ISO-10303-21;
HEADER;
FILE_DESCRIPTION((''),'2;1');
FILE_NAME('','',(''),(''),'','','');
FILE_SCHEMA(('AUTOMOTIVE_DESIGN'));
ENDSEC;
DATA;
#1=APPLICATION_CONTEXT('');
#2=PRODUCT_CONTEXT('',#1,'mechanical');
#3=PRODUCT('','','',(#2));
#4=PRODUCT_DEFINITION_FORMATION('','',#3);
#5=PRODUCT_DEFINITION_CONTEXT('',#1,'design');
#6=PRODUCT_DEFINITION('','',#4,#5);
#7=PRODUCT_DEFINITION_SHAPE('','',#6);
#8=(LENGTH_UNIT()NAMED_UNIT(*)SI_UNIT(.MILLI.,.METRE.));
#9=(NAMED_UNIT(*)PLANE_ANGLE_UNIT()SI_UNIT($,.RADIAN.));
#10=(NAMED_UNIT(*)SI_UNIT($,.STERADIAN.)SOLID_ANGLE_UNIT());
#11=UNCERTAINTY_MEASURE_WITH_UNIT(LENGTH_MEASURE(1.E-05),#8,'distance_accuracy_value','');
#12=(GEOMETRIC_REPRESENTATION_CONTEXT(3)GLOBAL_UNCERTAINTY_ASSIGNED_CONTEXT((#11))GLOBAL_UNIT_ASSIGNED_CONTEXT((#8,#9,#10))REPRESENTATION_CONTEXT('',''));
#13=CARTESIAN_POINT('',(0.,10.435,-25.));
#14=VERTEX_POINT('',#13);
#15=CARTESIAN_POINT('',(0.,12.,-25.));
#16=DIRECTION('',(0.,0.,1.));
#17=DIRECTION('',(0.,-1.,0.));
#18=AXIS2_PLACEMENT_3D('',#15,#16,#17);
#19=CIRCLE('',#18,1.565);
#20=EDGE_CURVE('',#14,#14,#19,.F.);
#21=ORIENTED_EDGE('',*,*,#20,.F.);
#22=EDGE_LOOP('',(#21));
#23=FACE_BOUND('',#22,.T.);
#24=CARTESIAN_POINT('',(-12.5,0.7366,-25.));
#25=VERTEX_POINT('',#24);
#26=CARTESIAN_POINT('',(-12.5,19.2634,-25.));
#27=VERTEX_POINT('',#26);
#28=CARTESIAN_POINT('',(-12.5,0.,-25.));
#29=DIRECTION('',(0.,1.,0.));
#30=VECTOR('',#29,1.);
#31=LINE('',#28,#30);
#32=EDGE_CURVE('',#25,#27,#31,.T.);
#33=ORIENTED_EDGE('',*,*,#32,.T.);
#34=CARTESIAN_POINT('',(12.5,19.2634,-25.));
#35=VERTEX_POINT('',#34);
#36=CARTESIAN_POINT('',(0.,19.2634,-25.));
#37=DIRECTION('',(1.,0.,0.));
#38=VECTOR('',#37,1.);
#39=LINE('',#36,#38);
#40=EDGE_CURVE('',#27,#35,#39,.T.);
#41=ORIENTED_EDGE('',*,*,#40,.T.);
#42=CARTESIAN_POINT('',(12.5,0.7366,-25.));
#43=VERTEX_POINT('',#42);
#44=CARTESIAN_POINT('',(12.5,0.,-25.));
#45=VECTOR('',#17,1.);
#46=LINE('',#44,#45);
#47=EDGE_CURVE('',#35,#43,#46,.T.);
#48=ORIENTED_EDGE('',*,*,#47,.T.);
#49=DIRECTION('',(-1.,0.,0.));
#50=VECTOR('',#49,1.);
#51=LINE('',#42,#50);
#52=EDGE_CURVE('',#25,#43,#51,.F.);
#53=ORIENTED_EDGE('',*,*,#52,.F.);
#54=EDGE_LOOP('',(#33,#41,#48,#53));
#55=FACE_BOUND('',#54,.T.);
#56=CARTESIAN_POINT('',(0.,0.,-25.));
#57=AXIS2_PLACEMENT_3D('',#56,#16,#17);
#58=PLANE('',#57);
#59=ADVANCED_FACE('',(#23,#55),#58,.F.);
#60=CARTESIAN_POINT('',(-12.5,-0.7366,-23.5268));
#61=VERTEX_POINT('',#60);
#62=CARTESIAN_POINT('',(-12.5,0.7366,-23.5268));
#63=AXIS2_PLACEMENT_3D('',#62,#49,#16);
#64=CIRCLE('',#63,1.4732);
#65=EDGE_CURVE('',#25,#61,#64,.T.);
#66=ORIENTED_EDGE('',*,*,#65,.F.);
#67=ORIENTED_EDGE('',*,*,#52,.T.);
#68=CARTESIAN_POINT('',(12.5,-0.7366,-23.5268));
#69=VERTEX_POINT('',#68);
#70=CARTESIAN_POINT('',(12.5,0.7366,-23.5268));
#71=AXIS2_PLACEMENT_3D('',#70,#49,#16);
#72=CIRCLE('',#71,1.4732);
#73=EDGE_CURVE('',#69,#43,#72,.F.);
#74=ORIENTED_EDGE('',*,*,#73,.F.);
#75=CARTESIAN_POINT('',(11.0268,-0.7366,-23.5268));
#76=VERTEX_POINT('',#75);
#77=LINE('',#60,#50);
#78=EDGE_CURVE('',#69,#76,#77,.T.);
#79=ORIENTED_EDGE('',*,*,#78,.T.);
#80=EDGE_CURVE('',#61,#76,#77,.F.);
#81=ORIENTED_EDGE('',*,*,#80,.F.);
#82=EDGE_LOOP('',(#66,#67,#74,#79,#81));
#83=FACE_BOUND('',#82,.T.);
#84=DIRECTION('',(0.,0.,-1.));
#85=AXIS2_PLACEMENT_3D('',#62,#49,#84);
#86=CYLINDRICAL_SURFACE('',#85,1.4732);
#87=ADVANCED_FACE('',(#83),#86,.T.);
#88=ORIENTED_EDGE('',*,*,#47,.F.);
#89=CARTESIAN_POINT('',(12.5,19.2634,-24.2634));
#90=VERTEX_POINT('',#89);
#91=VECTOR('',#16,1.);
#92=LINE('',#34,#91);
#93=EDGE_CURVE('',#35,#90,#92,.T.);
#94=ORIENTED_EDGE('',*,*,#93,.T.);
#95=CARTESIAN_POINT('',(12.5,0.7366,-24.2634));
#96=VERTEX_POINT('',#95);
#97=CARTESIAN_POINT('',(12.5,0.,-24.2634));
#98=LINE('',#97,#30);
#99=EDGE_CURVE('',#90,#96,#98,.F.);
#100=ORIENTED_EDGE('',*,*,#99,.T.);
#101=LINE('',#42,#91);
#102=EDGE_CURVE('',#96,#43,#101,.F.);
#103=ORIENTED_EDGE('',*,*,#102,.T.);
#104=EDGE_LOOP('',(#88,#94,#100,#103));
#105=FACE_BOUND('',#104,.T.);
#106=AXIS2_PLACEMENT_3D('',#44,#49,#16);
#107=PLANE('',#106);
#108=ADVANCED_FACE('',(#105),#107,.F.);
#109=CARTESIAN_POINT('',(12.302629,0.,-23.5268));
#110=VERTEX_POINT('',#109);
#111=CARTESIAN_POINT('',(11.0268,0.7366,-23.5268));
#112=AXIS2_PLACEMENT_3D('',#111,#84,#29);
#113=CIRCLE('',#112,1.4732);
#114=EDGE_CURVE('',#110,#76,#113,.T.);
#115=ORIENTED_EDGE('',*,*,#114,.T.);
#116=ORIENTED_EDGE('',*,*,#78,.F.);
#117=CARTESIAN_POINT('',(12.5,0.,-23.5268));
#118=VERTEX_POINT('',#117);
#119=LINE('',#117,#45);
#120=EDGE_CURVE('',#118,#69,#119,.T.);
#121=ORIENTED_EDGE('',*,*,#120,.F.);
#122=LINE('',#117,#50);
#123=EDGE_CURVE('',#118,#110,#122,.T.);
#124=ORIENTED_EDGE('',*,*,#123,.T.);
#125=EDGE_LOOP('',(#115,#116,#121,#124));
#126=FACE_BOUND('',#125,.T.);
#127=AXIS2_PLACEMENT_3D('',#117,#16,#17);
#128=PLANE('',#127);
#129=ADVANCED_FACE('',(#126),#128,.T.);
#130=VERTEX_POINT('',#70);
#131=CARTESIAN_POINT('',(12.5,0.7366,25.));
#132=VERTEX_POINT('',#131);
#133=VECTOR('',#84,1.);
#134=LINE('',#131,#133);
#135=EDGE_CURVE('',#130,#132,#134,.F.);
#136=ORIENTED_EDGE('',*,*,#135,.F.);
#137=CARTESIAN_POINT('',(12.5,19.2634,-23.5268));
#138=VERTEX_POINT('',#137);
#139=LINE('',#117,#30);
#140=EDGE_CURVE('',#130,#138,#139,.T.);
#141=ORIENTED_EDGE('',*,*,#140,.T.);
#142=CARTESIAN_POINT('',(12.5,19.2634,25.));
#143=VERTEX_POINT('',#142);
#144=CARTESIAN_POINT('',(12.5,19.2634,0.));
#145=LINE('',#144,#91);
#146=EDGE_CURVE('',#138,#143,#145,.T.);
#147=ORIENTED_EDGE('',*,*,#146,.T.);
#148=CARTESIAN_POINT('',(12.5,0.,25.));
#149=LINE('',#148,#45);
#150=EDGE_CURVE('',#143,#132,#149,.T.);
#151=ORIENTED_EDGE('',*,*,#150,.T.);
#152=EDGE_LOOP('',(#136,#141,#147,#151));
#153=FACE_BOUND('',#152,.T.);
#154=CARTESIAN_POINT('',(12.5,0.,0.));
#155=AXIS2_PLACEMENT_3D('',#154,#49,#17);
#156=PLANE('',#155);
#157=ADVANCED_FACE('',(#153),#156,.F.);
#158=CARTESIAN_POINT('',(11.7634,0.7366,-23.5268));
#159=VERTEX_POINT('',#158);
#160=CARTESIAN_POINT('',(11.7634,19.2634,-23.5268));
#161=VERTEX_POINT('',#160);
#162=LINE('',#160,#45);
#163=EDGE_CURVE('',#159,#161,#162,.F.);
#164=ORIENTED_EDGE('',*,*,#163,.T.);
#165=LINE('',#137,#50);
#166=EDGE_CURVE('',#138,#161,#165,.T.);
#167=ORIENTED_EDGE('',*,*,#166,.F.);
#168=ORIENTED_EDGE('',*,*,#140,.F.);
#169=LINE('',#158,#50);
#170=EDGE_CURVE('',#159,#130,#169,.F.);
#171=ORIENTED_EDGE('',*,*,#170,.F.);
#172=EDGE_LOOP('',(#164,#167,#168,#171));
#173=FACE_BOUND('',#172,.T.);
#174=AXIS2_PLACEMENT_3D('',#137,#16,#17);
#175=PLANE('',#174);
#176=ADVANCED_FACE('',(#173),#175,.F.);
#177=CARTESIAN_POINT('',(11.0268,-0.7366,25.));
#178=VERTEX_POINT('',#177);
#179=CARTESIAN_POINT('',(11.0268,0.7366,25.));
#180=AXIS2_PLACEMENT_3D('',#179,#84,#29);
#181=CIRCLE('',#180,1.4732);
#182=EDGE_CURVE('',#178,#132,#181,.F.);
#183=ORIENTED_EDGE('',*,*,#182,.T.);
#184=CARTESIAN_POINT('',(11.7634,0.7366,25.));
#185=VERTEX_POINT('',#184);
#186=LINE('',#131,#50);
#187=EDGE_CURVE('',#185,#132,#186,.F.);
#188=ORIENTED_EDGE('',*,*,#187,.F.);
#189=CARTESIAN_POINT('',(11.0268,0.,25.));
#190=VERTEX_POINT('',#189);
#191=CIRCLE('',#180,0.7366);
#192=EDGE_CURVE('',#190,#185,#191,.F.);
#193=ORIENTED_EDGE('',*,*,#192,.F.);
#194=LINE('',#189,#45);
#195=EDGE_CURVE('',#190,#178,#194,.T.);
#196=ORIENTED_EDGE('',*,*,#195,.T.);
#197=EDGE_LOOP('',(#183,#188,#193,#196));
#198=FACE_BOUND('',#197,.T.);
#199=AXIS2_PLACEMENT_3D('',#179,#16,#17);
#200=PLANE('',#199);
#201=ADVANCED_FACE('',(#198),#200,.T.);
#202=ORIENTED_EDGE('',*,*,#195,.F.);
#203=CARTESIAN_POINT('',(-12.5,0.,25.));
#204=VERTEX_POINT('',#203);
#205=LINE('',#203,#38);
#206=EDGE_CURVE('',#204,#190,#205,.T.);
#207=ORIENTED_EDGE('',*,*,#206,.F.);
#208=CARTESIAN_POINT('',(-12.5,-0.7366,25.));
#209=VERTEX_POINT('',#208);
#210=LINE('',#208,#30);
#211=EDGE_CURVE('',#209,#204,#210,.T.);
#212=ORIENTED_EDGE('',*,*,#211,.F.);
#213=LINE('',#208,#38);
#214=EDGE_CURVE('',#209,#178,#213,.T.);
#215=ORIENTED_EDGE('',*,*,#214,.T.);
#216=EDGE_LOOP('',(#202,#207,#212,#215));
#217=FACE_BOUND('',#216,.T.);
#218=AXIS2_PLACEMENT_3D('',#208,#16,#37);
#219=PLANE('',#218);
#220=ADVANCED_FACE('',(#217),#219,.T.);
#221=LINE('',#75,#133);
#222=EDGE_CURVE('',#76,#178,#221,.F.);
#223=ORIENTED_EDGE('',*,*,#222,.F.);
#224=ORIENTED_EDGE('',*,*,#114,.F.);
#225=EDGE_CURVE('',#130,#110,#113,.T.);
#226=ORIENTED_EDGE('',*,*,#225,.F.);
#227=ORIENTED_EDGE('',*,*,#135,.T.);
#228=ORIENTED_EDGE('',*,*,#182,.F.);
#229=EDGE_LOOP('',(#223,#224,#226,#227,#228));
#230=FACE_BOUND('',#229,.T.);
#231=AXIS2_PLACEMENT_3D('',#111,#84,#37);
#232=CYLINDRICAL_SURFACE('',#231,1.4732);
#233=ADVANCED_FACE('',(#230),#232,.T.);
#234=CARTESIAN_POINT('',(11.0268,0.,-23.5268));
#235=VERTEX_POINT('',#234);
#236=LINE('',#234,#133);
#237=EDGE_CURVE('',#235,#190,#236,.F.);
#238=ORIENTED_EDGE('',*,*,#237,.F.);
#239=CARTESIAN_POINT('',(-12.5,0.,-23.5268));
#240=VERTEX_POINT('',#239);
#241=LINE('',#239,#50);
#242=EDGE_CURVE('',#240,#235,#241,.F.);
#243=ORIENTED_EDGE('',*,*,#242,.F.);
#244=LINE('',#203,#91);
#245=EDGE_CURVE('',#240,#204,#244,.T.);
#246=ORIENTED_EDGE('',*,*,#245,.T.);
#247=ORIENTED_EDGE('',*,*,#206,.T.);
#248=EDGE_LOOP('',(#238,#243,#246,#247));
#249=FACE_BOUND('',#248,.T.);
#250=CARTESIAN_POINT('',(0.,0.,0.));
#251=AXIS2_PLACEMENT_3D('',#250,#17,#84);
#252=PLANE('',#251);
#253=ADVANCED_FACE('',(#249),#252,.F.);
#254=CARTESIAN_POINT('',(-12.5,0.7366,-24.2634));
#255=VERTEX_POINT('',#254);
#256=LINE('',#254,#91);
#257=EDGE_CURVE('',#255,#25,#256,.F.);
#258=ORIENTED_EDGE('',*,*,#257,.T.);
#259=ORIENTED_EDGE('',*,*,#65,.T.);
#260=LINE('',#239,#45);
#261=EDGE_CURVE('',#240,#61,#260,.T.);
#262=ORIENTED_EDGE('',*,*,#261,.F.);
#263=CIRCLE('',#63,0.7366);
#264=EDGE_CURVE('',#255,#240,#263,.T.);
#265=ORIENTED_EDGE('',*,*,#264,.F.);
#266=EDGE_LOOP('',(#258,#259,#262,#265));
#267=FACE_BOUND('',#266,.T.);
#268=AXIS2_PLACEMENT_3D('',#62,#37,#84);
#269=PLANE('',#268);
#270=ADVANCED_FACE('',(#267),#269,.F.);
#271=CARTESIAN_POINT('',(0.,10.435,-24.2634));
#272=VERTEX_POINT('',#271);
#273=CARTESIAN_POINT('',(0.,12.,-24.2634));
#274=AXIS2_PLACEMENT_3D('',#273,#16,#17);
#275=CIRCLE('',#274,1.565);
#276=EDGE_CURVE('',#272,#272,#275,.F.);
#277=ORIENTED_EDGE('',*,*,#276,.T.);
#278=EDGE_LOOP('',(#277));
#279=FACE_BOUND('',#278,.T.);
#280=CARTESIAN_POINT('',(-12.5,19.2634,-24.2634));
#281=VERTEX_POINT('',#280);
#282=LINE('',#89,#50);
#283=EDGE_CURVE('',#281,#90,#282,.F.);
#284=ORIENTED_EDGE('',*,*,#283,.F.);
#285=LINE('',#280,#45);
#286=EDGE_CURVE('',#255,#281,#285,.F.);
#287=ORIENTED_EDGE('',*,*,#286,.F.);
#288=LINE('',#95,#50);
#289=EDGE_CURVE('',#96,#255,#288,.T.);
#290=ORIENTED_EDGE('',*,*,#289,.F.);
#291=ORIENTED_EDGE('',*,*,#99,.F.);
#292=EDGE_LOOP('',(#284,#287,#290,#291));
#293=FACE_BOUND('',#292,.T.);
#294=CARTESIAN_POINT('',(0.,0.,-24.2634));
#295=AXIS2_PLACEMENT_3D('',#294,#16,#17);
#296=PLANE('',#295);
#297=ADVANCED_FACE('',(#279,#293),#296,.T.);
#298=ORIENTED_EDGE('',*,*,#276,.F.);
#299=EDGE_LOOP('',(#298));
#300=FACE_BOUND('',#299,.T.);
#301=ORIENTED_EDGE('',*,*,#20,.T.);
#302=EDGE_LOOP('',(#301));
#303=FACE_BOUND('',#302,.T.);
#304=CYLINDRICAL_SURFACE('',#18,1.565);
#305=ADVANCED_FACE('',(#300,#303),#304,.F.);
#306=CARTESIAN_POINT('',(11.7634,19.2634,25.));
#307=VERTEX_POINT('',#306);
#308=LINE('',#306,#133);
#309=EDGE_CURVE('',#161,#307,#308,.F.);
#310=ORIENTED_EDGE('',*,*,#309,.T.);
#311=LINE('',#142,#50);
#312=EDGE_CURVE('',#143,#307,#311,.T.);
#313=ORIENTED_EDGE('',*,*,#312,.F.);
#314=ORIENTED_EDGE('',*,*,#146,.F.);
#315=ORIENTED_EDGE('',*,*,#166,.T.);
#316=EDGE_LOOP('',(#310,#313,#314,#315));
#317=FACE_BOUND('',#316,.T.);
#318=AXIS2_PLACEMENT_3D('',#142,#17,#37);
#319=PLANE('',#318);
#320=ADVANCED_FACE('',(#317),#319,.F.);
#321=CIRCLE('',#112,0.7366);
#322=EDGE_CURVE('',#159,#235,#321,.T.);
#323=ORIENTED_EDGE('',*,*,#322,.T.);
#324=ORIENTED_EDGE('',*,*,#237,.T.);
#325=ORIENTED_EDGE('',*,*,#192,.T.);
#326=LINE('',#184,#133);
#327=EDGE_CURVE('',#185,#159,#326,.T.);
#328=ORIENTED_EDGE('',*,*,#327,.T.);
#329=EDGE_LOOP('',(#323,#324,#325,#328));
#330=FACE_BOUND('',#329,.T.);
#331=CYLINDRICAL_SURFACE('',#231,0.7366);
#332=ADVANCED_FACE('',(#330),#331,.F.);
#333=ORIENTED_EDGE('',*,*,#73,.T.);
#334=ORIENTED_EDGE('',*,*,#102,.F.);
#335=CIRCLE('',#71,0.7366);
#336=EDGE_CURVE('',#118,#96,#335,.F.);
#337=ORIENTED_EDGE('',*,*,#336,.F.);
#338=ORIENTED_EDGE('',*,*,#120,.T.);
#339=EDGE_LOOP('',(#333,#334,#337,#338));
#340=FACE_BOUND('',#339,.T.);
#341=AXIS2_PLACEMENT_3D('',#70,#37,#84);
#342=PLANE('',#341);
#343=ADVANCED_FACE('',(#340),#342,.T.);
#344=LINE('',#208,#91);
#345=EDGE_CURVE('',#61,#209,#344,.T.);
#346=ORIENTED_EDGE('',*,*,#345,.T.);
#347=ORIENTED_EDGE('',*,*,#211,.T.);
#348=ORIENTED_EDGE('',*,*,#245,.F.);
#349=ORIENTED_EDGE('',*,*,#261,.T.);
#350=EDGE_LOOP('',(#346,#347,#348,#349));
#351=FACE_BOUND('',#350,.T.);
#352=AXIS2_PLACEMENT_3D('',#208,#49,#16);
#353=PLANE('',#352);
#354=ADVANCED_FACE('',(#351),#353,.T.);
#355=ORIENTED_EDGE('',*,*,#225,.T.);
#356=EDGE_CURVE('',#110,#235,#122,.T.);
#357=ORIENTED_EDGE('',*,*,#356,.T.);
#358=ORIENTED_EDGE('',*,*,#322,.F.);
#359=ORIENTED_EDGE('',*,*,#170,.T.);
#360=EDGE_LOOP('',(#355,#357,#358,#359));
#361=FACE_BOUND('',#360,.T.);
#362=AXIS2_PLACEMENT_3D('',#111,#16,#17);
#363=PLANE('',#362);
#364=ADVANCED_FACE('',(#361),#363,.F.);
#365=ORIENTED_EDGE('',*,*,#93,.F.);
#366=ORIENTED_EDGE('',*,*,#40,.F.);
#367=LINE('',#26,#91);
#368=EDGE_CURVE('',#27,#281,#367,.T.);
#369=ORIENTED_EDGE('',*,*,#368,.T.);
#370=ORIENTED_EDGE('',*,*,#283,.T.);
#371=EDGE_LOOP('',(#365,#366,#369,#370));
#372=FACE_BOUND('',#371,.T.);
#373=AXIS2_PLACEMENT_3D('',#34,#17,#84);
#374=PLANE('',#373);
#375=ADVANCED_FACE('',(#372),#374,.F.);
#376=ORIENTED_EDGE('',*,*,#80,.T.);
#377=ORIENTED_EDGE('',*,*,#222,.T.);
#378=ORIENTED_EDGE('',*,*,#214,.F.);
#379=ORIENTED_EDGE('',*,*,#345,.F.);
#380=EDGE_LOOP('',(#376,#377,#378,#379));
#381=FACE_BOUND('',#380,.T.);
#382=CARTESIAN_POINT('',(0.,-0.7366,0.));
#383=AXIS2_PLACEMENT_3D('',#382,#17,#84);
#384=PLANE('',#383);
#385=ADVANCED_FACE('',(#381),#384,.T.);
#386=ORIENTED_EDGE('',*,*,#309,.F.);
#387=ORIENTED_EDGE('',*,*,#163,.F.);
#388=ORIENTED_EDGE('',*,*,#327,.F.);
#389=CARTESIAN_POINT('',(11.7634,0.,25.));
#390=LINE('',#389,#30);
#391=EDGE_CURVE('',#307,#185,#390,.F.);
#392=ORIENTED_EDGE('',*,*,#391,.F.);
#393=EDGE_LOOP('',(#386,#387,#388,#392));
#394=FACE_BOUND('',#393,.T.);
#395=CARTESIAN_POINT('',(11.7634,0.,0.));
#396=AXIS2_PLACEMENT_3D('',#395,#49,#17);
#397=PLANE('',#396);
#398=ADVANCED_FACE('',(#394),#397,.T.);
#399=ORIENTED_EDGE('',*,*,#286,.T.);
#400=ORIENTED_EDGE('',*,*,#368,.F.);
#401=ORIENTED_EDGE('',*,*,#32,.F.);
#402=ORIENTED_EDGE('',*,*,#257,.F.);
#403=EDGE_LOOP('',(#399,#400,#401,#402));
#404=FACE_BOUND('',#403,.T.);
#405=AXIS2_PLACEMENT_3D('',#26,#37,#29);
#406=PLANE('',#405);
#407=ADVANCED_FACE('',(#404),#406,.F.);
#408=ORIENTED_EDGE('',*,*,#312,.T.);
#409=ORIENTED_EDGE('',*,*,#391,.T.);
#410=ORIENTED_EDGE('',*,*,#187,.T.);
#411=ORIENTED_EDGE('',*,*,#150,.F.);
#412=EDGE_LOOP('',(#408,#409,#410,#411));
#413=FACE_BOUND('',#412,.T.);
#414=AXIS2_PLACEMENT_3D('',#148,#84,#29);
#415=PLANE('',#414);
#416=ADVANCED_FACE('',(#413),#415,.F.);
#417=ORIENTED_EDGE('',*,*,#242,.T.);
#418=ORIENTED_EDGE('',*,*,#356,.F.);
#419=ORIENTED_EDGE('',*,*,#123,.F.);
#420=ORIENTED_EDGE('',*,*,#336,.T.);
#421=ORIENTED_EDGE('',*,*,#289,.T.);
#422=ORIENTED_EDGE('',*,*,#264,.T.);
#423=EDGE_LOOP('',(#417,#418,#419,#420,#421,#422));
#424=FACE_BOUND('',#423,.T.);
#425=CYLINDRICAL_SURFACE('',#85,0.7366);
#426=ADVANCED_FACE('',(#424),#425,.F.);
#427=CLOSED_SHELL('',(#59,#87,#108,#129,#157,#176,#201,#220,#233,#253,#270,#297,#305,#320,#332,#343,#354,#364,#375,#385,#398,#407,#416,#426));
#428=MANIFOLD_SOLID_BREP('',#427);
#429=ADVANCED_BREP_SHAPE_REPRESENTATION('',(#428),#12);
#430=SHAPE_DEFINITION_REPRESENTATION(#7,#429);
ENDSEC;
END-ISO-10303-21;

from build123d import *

# Parameters (mm, degrees)
SKETCH1_W                    = 25
SKETCH1_H                    = 50
BASE_FLANGE1_DEPTH           = 0.7366
EDGE_FLANGE1_STRIP_W         = 4.4196
EDGE_FLANGE1_STRIP_H         = 0.7366
EDGE_FLANGE1_STRIP_CUT_DEPTH = 25
EDGE_FLANGE1_DEPTH           = 25
EDGE_FLANGE1_PROFILE_W       = 25
EDGE_FLANGE1_PROFILE_H       = 18.5268
EDGE_FLANGE1_PROFILE_R       = 1.565
EDGE_FLANGE1_FLAT_DEPTH      = 0.7366
EDGE_FLANGE3_STRIP_W         = 4.4196
EDGE_FLANGE3_STRIP_H         = 0.7366
EDGE_FLANGE3_STRIP_CUT_DEPTH = 48.5268
EDGE_FLANGE3_DEPTH           = 48.5268


# Sheet-metal steps are written as plain solids
with BuildPart() as part:
    # Sketch1 → Base-Flange1 (new body)
    with BuildSketch(Plane(origin=(0, 0, 0), x_dir=(1, 0, 0), z_dir=(0, 1, 0))):
        Rectangle(SKETCH1_W, SKETCH1_H)
    extrude(amount=-BASE_FLANGE1_DEPTH)

    # Edge-Flange1 strip (across the edge) → Edge-Flange1 strip cut (cut)
    with BuildSketch(Plane(origin=(12.5, 0, -25), x_dir=(0, 0, 1), z_dir=(-1, 0, 0))):
        with Locations((-0.7366, -0.3683)):
            Rectangle(EDGE_FLANGE1_STRIP_W, EDGE_FLANGE1_STRIP_H)
    extrude(amount=EDGE_FLANGE1_STRIP_CUT_DEPTH, mode=Mode.SUBTRACT)

    # Edge-Flange1 bend section (across the edge) → Edge-Flange1 (add)
    with BuildSketch(Plane(origin=(12.5, 0, -25), x_dir=(0, 0, 1), z_dir=(-1, 0, 0))):
        with BuildLine():
            Line((0, 0.7366), (0.7366, 0.7366))
            ThreePointArc((0.7366, 0.7366), (0.952345145, 0.215745145), (1.4732, 0))
            Line((1.4732, 0), (1.4732, -0.7366))
            ThreePointArc((1.4732, -0.7366), (0.43149029, -0.30510971), (0, 0.7366))
        make_face()
    extrude(amount=EDGE_FLANGE1_DEPTH)

    # Edge-Flange1 profile (on flange) → Edge-Flange1 flat (add)
    with BuildSketch(Plane(origin=(0, 0, -25), x_dir=(-1, 0, 0), z_dir=(0, 0, -1))):
        with Locations((0, 10)):
            Rectangle(EDGE_FLANGE1_PROFILE_W, EDGE_FLANGE1_PROFILE_H)
        with Locations((0, 12)):
            Circle(EDGE_FLANGE1_PROFILE_R, mode=Mode.SUBTRACT)
    extrude(amount=-EDGE_FLANGE1_FLAT_DEPTH)

    # Edge-Flange3 strip (across the edge) → Edge-Flange3 strip cut (cut)
    with BuildSketch(Plane(origin=(12.5, 0, 25), x_dir=(-1, 0, 0), z_dir=(0, 0, -1))):
        with Locations((-0.7366, -0.3683)):
            Rectangle(EDGE_FLANGE3_STRIP_W, EDGE_FLANGE3_STRIP_H)
    extrude(amount=EDGE_FLANGE3_STRIP_CUT_DEPTH, mode=Mode.SUBTRACT)

    # Edge-Flange3 section (across the edge) → Edge-Flange3 (add)
    with BuildSketch(Plane(origin=(12.5, 0, 25), x_dir=(-1, 0, 0), z_dir=(0, 0, -1))):
        with BuildLine():
            Line((0, 0.7366), (0, 19.2634))
            Line((0, 19.2634), (0.7366, 19.2634))
            Line((0.7366, 19.2634), (0.7366, 0.7366))
            ThreePointArc((0.7366, 0.7366), (0.952345145, 0.215745145), (1.4732, 0))
            Line((1.4732, 0), (1.4732, -0.7366))
            ThreePointArc((1.4732, -0.7366), (0.43149029, -0.30510971), (0, 0.7366))
        make_face()
    extrude(amount=EDGE_FLANGE3_DEPTH)


solid = part.part
